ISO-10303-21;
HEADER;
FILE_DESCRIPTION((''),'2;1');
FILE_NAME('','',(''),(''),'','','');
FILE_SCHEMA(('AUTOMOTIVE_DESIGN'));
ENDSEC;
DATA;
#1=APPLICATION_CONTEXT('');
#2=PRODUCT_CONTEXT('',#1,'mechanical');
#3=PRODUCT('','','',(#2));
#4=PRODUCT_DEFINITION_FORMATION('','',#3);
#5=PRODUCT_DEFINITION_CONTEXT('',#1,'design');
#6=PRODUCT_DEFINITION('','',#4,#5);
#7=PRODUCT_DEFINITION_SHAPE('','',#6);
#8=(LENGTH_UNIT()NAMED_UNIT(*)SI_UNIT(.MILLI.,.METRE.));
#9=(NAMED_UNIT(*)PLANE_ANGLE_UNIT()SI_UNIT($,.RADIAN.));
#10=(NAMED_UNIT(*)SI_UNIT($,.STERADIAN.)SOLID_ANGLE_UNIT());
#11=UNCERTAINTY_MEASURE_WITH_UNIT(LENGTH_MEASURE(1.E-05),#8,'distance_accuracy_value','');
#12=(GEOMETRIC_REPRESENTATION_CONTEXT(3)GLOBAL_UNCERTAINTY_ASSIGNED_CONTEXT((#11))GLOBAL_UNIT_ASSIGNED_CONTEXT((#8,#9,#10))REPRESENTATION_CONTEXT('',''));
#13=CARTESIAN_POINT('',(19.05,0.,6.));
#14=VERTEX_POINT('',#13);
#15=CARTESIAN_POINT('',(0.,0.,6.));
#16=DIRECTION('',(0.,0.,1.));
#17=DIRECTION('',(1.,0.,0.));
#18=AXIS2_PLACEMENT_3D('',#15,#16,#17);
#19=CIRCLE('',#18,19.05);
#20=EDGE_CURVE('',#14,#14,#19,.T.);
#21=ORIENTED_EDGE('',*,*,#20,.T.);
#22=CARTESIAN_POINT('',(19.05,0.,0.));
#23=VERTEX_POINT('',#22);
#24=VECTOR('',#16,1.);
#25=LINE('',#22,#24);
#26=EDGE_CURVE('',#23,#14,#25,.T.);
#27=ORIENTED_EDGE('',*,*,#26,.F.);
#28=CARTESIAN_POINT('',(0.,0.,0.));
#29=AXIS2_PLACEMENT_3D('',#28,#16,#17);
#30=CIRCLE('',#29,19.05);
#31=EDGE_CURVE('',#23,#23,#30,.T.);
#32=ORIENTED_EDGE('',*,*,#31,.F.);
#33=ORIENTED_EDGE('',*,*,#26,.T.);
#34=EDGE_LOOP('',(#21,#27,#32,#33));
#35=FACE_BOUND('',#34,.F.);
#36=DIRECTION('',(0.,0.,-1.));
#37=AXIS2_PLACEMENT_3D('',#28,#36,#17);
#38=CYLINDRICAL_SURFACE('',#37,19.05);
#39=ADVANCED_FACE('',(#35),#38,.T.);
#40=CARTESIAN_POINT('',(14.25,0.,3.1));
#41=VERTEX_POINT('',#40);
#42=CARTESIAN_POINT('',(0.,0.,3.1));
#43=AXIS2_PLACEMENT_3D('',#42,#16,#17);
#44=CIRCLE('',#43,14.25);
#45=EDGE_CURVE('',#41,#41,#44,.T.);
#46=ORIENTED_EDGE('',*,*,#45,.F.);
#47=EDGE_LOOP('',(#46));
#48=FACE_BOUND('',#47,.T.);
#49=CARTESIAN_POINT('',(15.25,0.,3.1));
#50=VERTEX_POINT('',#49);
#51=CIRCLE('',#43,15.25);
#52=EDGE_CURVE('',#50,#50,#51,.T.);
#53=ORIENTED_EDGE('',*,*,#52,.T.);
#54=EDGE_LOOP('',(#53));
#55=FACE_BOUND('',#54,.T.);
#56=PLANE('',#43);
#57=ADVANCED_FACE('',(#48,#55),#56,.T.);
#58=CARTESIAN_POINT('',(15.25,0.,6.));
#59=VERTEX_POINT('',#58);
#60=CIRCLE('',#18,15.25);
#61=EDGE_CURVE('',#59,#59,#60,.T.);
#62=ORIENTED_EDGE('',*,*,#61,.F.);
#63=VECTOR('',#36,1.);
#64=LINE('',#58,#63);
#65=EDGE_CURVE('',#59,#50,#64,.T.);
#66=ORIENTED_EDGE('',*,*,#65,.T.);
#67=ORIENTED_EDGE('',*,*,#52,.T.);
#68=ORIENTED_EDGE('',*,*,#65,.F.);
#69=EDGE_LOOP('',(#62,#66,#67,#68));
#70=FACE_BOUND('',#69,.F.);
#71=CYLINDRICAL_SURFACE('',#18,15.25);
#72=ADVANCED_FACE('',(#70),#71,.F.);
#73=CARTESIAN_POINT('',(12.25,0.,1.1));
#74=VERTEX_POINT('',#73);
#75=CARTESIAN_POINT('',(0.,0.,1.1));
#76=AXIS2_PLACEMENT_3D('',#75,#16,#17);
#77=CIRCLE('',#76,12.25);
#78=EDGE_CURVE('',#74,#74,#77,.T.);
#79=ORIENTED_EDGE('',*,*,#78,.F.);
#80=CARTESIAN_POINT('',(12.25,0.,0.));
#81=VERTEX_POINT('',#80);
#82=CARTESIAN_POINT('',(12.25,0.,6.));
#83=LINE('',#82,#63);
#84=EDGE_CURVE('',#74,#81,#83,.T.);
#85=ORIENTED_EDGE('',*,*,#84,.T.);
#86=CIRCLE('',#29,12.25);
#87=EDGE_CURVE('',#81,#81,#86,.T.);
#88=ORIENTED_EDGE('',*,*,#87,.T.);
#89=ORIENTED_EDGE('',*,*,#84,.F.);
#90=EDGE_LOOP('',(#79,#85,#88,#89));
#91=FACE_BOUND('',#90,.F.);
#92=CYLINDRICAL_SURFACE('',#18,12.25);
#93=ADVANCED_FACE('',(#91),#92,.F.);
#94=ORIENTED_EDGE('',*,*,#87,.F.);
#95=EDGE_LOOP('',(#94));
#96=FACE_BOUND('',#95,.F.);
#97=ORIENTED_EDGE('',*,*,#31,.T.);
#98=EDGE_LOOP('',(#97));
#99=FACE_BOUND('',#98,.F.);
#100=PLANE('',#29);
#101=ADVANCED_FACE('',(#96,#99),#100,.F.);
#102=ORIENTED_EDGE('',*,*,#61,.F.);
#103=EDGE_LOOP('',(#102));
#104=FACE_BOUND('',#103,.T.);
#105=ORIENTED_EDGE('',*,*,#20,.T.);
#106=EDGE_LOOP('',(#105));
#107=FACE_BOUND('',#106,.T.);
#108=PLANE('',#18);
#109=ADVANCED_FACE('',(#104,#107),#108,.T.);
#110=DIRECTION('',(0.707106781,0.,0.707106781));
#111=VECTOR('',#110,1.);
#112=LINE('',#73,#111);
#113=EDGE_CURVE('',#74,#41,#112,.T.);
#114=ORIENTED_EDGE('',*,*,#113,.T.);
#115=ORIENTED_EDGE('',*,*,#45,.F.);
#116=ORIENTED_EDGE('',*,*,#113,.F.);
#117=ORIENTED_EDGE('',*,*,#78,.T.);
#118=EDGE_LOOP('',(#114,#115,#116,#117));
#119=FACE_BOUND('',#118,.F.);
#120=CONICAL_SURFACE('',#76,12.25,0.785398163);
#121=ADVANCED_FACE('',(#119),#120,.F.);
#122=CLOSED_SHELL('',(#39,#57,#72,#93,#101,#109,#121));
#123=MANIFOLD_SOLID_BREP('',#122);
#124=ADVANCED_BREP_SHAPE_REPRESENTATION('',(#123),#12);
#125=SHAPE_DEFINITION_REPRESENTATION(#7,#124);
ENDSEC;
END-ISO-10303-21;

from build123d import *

# Parameters (mm, degrees)
F0_R     = 19.05
F1_DEPTH = 6
F2_R     = 12.25
F3_DEPTH = 6
F4_R     = 15.25
F5_DEPTH = 2.9
F6_SIZE  = 2


# Not quite as in the source:
# - a feature names something its author has since deleted; it is built from what else it names


with BuildPart() as f1:
    # F0 (on Top) → F1 (new body)
    with BuildSketch(Plane.XY):
        Circle(F0_R)
    extrude(amount=F1_DEPTH)

    # F2 (on face) → F3 (cut)
    with BuildSketch(Plane.XY.offset(6)):
        Circle(F2_R)
    extrude(amount=-F3_DEPTH, mode=Mode.SUBTRACT)

    # F4 (on face) → F5 (cut)
    with BuildSketch(Plane.XY.offset(6)):
        Circle(F4_R)
    extrude(amount=-F5_DEPTH, mode=Mode.SUBTRACT)

    # F6
    f6_edges = [f1.edges().sort_by_distance(p)[0] for p in [
        (-12.25, 0, 3.1),
    ]]
    chamfer(f6_edges, length=F6_SIZE)


solid = f1.part
